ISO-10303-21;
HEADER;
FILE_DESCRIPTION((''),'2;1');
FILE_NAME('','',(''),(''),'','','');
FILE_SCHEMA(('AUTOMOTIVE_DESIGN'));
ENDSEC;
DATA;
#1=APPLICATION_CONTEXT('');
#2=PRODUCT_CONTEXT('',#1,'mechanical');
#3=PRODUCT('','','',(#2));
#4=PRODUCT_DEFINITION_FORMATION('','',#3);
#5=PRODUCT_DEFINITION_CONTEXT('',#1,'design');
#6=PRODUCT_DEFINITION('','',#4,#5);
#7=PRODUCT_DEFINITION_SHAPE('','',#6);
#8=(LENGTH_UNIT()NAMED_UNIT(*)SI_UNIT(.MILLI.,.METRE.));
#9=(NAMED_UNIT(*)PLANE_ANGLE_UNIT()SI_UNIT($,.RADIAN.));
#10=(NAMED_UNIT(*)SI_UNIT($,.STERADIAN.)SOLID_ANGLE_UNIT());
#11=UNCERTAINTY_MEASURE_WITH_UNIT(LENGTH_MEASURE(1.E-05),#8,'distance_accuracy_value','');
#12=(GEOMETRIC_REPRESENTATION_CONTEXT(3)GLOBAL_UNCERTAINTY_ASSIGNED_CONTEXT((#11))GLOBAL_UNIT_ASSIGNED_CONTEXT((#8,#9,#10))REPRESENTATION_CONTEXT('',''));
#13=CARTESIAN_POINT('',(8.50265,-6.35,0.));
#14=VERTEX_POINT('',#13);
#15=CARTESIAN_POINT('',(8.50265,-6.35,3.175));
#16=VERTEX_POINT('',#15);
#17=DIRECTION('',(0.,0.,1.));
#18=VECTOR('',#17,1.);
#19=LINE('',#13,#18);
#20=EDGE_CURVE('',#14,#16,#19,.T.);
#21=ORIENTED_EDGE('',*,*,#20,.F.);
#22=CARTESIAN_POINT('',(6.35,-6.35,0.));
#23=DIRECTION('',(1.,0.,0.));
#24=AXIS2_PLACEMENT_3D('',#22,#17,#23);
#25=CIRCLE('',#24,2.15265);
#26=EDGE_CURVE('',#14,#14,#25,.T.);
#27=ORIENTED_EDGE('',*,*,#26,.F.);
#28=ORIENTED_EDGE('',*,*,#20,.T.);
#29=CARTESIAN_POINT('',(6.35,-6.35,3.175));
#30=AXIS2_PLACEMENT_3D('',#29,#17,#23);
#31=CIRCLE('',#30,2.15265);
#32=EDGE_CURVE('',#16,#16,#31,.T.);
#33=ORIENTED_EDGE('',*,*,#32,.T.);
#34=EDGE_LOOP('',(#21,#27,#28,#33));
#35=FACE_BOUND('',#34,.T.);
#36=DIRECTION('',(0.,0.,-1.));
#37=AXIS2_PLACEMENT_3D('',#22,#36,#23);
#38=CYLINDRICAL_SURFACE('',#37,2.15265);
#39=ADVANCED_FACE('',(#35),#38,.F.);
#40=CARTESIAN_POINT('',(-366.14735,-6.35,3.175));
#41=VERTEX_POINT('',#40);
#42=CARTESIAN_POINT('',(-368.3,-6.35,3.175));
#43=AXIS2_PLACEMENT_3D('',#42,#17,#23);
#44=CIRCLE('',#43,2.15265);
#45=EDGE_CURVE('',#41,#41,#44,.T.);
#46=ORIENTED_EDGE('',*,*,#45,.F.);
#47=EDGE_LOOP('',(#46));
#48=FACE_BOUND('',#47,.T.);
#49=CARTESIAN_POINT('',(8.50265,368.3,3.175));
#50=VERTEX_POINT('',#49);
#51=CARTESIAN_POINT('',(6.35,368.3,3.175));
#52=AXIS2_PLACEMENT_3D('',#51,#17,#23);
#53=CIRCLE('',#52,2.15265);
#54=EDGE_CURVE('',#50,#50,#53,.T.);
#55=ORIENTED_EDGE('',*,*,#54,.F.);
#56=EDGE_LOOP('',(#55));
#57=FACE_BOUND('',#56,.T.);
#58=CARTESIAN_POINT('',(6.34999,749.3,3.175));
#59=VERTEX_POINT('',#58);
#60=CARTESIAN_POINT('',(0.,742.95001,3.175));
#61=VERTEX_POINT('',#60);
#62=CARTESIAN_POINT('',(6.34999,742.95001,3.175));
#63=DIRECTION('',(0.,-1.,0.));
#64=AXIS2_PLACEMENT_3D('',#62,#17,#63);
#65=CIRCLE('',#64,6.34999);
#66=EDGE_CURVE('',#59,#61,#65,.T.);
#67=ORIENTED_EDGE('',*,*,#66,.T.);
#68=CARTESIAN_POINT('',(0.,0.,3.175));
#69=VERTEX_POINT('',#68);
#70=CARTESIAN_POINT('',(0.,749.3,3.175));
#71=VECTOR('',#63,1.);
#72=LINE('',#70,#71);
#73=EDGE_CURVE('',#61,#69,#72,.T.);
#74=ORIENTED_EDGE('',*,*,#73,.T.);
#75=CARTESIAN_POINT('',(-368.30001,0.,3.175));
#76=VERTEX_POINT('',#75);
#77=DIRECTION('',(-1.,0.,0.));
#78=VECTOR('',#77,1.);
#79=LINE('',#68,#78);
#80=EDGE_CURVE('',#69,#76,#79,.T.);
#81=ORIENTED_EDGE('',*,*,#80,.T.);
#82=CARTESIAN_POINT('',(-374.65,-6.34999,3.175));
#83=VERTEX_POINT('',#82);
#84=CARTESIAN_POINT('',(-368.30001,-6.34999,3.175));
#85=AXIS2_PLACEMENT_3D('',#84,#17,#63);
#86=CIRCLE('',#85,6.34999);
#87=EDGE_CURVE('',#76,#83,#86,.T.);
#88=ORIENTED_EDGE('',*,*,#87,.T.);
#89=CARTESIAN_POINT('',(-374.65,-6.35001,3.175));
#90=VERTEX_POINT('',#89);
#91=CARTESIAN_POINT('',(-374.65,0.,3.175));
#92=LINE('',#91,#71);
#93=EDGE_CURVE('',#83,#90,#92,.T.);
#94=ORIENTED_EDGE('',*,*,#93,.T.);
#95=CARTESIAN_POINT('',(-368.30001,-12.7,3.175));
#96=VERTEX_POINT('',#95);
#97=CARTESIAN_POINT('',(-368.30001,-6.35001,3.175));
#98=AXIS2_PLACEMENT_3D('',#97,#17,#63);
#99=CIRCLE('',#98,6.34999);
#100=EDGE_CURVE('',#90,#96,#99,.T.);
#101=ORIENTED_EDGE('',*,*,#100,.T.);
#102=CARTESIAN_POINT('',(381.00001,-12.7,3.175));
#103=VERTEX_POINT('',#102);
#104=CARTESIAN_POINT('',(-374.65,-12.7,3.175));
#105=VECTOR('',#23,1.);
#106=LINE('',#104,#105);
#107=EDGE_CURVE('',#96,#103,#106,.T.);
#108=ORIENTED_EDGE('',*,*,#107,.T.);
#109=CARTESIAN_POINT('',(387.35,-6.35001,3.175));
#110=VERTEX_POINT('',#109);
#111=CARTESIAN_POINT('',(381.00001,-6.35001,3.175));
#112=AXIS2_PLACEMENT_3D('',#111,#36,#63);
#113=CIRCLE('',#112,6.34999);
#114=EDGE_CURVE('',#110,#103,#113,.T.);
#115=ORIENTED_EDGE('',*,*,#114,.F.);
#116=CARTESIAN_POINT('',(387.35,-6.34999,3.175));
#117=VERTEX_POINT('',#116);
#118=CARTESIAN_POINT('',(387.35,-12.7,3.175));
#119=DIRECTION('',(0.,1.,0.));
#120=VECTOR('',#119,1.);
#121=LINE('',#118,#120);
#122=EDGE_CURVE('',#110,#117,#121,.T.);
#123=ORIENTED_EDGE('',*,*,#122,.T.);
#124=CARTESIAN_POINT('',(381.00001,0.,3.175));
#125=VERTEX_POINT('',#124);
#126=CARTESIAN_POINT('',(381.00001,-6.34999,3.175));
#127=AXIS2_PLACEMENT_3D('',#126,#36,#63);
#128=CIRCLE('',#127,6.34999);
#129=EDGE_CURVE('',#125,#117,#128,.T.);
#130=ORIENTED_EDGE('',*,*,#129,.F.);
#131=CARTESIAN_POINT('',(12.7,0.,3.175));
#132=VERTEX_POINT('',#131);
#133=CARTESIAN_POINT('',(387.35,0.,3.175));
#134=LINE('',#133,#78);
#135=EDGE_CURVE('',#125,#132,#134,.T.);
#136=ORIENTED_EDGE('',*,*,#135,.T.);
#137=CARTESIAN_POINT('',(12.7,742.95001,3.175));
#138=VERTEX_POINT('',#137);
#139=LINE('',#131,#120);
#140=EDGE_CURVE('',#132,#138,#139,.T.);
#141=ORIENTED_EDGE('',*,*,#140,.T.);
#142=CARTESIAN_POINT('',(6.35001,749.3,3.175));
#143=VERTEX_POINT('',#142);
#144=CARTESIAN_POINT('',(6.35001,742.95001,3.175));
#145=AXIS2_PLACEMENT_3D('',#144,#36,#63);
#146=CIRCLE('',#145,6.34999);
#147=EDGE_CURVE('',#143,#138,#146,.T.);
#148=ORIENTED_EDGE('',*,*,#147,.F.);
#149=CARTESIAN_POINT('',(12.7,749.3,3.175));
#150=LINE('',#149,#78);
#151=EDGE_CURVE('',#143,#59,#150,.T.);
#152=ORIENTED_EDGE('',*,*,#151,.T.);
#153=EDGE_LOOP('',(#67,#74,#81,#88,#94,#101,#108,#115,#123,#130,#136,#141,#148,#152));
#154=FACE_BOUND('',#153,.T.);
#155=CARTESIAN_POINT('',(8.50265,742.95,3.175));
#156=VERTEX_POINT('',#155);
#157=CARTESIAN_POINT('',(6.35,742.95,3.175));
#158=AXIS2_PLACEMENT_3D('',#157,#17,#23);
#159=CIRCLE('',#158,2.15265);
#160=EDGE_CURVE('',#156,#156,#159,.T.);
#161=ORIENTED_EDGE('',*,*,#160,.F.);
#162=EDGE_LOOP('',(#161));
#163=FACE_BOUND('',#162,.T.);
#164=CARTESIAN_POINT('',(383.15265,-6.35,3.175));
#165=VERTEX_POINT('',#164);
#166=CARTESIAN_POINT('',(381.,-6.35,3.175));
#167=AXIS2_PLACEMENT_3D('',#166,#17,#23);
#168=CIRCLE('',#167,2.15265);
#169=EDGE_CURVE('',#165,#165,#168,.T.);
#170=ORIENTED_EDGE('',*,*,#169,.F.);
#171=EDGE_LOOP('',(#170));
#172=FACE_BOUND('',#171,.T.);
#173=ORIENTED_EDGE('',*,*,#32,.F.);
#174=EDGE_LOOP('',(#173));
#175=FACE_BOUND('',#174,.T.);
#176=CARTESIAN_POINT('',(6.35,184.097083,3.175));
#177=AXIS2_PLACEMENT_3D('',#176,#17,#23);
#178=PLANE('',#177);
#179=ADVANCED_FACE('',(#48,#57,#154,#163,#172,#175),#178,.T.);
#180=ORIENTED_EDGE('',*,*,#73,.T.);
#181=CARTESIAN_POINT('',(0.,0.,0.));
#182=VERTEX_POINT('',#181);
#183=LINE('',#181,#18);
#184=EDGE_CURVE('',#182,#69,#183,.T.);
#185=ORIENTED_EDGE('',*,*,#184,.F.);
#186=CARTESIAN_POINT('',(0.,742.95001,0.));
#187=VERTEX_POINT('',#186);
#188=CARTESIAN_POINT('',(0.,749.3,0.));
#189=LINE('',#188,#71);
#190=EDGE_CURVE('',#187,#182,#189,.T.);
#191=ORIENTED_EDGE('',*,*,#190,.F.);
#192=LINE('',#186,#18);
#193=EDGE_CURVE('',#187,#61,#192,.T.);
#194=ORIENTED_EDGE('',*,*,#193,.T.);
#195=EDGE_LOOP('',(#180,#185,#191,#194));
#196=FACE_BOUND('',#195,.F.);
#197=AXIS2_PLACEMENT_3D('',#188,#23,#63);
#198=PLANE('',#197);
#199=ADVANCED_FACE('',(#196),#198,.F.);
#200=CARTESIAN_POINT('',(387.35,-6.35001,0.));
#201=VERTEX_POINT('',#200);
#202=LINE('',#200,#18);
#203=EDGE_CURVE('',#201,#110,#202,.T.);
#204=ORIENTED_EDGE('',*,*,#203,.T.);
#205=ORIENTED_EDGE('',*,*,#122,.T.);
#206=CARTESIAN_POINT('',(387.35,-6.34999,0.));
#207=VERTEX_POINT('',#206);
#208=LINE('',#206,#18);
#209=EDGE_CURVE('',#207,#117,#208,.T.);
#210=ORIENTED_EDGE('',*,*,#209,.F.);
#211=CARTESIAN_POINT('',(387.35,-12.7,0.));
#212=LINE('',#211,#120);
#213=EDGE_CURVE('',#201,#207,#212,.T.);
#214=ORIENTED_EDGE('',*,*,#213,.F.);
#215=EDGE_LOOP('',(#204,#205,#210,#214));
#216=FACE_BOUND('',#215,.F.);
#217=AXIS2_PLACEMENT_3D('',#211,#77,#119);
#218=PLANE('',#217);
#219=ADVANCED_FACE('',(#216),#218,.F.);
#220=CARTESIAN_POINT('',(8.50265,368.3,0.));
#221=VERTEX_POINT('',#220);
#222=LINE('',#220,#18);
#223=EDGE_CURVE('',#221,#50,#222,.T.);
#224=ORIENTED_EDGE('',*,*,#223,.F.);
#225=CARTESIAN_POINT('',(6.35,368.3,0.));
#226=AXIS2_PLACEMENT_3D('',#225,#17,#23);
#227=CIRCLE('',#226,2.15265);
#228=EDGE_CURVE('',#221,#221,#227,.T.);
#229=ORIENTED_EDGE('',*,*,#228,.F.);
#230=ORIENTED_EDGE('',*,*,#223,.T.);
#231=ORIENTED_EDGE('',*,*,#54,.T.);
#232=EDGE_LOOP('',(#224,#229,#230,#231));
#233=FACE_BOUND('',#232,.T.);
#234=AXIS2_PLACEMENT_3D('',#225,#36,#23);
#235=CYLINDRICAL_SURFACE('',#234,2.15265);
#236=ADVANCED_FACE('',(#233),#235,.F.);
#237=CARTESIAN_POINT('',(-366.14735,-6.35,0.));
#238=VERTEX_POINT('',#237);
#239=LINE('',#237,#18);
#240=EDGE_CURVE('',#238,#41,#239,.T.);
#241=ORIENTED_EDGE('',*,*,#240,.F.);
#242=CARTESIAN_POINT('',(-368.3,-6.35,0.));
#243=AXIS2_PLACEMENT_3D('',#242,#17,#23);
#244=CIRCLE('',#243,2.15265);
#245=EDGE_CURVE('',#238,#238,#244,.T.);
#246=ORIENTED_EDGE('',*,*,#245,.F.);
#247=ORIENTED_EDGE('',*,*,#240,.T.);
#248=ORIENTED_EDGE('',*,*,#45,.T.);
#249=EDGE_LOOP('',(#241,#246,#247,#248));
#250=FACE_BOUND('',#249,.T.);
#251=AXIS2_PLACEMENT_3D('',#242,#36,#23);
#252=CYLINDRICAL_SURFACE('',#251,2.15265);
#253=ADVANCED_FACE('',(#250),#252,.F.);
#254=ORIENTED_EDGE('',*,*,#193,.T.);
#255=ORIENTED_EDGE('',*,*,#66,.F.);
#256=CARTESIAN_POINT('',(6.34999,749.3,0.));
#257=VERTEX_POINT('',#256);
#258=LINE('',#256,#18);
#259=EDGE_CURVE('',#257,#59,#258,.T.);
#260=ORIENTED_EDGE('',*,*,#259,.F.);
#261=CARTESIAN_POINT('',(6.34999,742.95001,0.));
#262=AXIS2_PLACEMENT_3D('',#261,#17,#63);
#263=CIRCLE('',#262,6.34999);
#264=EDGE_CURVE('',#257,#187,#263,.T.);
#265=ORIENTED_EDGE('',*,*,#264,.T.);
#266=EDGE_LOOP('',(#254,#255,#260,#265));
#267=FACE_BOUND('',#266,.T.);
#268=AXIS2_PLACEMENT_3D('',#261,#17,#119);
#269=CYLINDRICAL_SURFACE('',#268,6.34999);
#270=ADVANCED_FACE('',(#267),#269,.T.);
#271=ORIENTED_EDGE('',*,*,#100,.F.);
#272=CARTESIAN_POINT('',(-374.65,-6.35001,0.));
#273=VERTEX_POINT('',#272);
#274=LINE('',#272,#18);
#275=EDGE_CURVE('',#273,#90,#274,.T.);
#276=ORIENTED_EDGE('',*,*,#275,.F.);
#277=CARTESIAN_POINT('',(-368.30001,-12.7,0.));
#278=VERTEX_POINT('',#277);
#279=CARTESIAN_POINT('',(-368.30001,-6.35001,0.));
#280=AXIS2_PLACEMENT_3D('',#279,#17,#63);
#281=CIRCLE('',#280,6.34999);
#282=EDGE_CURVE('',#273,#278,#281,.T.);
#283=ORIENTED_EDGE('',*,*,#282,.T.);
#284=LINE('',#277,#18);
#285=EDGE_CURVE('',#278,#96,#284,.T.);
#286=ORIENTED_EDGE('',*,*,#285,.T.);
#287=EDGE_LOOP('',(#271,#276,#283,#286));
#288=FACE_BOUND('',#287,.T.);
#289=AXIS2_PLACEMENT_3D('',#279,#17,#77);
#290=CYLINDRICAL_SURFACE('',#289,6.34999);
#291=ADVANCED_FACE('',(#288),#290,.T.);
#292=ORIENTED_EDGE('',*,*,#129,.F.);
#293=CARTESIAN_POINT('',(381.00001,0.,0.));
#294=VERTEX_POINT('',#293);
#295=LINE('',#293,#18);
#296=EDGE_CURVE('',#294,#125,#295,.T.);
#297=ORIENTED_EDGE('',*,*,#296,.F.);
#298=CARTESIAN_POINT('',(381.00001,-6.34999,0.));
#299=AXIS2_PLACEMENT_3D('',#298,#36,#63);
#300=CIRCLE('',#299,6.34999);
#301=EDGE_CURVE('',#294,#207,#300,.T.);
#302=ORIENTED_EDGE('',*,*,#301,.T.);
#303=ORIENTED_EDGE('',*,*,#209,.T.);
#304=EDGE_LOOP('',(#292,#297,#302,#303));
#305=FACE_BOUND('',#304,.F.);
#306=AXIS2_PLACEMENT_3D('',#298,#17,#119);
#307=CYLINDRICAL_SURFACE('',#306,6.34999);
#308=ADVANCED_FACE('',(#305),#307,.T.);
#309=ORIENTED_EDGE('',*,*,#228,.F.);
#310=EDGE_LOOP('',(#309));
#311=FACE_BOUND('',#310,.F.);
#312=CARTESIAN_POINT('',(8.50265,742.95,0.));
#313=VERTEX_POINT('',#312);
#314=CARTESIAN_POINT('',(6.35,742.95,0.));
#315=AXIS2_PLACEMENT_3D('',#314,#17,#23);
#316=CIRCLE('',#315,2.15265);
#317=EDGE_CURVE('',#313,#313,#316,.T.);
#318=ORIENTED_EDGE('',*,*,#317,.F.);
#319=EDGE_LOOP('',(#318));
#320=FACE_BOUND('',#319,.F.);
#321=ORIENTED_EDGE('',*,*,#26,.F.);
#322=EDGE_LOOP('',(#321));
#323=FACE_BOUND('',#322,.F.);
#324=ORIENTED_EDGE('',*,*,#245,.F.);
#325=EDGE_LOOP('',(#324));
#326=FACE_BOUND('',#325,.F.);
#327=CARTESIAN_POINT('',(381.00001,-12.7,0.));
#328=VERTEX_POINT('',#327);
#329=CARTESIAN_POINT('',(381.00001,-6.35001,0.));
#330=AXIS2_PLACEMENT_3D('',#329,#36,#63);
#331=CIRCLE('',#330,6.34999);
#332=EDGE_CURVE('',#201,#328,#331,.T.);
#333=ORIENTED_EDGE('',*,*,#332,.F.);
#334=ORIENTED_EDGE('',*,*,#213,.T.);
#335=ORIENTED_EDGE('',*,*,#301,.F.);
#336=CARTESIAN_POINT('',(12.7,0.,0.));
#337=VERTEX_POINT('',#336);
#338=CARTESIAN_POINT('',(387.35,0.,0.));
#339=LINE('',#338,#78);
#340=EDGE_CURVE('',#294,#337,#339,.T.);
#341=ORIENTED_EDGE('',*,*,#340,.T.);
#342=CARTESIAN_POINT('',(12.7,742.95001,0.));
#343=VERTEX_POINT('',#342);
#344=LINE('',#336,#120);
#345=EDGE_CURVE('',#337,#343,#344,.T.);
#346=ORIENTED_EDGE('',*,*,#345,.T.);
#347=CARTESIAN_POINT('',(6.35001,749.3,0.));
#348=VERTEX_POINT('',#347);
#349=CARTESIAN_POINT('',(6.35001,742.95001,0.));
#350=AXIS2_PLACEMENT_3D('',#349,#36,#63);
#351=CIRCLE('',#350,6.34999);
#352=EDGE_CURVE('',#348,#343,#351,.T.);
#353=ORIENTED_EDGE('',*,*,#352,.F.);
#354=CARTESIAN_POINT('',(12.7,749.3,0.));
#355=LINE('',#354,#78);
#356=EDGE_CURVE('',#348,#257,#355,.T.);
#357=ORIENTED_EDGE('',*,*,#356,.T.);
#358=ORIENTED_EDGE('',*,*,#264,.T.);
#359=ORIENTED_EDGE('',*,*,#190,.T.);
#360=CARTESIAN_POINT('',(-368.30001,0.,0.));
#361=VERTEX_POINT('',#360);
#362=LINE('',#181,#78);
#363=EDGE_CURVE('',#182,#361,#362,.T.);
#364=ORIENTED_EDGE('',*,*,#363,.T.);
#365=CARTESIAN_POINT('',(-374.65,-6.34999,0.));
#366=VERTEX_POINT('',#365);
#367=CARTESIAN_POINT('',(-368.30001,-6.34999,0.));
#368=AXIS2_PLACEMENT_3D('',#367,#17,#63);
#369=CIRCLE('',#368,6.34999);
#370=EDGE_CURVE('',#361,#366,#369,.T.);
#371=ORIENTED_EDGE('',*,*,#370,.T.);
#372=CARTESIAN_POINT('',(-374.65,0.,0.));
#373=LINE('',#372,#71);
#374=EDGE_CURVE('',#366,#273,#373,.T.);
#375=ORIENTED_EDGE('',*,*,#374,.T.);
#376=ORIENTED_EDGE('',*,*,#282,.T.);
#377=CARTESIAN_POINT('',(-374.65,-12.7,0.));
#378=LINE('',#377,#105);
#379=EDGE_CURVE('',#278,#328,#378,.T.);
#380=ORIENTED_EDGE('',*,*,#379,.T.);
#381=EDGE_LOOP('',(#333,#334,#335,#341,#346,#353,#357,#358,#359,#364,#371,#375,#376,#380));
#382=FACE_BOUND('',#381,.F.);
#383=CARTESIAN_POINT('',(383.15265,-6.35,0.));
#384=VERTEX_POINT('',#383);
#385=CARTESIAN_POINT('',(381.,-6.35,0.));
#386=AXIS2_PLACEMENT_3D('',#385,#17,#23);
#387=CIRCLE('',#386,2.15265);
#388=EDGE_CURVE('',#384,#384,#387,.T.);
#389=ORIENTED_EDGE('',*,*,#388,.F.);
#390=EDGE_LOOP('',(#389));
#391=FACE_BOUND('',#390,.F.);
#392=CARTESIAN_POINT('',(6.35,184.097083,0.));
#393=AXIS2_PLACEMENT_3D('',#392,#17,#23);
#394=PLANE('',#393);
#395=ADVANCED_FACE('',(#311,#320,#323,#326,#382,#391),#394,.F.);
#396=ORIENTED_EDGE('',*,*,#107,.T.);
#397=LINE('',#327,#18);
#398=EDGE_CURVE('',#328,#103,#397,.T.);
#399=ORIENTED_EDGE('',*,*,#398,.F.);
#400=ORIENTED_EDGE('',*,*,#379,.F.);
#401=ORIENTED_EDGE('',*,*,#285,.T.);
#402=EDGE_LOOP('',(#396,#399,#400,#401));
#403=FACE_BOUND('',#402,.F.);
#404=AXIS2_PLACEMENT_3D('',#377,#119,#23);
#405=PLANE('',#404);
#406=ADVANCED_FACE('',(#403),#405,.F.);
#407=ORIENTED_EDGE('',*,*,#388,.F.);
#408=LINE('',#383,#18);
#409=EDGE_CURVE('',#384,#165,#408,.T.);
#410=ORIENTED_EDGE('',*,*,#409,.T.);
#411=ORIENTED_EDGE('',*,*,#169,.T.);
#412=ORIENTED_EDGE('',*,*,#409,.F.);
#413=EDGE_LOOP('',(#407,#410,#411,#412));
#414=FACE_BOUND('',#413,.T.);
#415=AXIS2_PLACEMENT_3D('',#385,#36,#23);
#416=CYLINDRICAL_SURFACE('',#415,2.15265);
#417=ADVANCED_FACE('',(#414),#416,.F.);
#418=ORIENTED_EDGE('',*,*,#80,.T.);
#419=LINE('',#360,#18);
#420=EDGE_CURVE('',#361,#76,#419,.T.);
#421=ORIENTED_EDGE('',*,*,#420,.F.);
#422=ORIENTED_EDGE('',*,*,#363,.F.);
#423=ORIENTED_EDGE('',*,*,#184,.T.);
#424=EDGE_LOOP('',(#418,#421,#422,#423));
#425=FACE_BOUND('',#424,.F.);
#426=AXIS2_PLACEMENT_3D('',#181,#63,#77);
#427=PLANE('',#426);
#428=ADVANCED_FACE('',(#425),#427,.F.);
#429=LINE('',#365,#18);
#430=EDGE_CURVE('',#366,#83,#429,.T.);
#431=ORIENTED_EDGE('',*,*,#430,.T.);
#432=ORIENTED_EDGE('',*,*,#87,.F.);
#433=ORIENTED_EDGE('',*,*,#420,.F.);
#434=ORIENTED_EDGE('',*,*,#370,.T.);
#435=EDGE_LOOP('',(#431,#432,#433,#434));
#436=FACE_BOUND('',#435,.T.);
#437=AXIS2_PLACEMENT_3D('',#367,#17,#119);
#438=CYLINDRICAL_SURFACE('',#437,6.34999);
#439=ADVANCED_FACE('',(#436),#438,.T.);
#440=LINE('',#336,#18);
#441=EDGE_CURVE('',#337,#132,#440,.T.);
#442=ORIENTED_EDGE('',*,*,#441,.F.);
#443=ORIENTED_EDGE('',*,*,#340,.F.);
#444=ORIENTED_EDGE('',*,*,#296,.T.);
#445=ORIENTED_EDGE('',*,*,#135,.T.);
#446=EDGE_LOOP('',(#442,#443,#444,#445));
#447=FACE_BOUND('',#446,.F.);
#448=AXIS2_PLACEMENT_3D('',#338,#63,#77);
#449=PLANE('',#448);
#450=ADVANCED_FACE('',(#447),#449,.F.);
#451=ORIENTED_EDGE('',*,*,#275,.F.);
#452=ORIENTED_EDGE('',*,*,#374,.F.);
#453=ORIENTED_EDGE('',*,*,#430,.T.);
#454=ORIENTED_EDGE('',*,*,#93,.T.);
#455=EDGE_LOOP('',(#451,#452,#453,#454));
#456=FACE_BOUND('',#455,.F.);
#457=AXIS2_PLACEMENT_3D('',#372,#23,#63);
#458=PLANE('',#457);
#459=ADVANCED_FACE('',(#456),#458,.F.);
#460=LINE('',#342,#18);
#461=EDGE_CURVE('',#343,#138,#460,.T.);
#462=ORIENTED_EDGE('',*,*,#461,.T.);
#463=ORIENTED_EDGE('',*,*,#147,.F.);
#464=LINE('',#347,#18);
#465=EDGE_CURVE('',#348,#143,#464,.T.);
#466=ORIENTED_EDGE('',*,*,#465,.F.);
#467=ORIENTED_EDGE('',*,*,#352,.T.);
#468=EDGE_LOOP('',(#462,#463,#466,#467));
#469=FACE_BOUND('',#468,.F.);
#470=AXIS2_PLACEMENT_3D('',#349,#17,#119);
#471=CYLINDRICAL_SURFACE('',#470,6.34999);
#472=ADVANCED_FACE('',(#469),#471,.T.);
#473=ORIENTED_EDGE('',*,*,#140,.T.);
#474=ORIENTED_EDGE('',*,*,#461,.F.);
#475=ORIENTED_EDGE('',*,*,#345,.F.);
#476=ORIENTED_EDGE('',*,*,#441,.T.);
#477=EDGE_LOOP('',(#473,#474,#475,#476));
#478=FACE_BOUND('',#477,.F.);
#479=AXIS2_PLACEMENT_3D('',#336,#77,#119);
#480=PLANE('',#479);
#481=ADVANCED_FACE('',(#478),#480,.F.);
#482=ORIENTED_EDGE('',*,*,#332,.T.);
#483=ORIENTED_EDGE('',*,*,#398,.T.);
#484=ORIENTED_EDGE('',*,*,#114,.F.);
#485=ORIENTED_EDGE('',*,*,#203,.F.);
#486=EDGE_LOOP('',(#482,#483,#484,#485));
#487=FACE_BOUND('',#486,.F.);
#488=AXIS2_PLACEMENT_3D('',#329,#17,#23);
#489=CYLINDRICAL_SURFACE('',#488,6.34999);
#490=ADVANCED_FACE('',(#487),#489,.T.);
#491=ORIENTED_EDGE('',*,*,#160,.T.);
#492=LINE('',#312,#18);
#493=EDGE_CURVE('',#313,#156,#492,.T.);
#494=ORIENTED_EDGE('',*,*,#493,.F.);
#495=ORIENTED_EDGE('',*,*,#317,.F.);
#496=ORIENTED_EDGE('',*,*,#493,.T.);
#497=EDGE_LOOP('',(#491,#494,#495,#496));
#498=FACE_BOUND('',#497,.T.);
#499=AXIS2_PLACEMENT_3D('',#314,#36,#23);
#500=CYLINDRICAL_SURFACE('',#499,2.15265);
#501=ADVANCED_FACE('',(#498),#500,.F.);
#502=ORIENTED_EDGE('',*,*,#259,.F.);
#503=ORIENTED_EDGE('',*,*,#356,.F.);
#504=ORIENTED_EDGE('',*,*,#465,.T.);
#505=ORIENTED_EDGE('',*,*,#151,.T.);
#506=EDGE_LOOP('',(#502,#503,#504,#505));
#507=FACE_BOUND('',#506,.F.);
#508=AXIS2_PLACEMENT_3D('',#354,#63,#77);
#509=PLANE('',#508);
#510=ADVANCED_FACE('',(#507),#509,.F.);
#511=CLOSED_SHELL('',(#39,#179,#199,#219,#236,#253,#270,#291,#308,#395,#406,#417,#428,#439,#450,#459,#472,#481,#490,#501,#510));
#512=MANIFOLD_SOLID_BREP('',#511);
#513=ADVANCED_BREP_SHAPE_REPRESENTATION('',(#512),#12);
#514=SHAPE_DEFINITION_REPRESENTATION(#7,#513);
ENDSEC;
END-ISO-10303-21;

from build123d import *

# Parameters (mm, degrees)
F0_R     = 2.15265
F1_DEPTH = 3.175
F2_R     = 6.34999


# Not quite as in the source:
# - a fillet or chamfer is up to 0.001 mm smaller than in the source, because OpenCascade refuses the exact size


with BuildPart() as f1:
    # F0 (on Top) → F1 (new body)
    with BuildSketch(Plane.XY):
        Polygon((12.7, 749.3), (0, 749.3), (0, 0), (-374.65, 0), (-374.65, -12.7), (387.35, -12.7), (387.35, 0), (12.7, 0), align=None)
        with Locations((-368.3, -6.35)):
            Circle(F0_R, mode=Mode.SUBTRACT)
        with Locations((6.35, -6.35)):
            Circle(F0_R, mode=Mode.SUBTRACT)
        with Locations((381, -6.35)):
            Circle(F0_R, mode=Mode.SUBTRACT)
        with Locations((6.35, 368.3)):
            Circle(F0_R, mode=Mode.SUBTRACT)
        with Locations((6.35, 742.95)):
            Circle(F0_R, mode=Mode.SUBTRACT)
    extrude(amount=F1_DEPTH)

    # F2 (radius 6.35 in the source; OpenCascade refuses exactly that, so slightly less here)
    f2_edges = [f1.edges().sort_by_distance(p)[0] for p in [
        (0, 749.3, 1.5875),
        (12.7, 749.3, 1.5875),
        (387.35, -12.7, 1.5875),
        (387.35, 0, 1.5875),
        (-374.65, -12.7, 1.5875),
        (-374.65, 0, 1.5875),
    ]]
    fillet(f2_edges, radius=F2_R)


solid = f1.part
